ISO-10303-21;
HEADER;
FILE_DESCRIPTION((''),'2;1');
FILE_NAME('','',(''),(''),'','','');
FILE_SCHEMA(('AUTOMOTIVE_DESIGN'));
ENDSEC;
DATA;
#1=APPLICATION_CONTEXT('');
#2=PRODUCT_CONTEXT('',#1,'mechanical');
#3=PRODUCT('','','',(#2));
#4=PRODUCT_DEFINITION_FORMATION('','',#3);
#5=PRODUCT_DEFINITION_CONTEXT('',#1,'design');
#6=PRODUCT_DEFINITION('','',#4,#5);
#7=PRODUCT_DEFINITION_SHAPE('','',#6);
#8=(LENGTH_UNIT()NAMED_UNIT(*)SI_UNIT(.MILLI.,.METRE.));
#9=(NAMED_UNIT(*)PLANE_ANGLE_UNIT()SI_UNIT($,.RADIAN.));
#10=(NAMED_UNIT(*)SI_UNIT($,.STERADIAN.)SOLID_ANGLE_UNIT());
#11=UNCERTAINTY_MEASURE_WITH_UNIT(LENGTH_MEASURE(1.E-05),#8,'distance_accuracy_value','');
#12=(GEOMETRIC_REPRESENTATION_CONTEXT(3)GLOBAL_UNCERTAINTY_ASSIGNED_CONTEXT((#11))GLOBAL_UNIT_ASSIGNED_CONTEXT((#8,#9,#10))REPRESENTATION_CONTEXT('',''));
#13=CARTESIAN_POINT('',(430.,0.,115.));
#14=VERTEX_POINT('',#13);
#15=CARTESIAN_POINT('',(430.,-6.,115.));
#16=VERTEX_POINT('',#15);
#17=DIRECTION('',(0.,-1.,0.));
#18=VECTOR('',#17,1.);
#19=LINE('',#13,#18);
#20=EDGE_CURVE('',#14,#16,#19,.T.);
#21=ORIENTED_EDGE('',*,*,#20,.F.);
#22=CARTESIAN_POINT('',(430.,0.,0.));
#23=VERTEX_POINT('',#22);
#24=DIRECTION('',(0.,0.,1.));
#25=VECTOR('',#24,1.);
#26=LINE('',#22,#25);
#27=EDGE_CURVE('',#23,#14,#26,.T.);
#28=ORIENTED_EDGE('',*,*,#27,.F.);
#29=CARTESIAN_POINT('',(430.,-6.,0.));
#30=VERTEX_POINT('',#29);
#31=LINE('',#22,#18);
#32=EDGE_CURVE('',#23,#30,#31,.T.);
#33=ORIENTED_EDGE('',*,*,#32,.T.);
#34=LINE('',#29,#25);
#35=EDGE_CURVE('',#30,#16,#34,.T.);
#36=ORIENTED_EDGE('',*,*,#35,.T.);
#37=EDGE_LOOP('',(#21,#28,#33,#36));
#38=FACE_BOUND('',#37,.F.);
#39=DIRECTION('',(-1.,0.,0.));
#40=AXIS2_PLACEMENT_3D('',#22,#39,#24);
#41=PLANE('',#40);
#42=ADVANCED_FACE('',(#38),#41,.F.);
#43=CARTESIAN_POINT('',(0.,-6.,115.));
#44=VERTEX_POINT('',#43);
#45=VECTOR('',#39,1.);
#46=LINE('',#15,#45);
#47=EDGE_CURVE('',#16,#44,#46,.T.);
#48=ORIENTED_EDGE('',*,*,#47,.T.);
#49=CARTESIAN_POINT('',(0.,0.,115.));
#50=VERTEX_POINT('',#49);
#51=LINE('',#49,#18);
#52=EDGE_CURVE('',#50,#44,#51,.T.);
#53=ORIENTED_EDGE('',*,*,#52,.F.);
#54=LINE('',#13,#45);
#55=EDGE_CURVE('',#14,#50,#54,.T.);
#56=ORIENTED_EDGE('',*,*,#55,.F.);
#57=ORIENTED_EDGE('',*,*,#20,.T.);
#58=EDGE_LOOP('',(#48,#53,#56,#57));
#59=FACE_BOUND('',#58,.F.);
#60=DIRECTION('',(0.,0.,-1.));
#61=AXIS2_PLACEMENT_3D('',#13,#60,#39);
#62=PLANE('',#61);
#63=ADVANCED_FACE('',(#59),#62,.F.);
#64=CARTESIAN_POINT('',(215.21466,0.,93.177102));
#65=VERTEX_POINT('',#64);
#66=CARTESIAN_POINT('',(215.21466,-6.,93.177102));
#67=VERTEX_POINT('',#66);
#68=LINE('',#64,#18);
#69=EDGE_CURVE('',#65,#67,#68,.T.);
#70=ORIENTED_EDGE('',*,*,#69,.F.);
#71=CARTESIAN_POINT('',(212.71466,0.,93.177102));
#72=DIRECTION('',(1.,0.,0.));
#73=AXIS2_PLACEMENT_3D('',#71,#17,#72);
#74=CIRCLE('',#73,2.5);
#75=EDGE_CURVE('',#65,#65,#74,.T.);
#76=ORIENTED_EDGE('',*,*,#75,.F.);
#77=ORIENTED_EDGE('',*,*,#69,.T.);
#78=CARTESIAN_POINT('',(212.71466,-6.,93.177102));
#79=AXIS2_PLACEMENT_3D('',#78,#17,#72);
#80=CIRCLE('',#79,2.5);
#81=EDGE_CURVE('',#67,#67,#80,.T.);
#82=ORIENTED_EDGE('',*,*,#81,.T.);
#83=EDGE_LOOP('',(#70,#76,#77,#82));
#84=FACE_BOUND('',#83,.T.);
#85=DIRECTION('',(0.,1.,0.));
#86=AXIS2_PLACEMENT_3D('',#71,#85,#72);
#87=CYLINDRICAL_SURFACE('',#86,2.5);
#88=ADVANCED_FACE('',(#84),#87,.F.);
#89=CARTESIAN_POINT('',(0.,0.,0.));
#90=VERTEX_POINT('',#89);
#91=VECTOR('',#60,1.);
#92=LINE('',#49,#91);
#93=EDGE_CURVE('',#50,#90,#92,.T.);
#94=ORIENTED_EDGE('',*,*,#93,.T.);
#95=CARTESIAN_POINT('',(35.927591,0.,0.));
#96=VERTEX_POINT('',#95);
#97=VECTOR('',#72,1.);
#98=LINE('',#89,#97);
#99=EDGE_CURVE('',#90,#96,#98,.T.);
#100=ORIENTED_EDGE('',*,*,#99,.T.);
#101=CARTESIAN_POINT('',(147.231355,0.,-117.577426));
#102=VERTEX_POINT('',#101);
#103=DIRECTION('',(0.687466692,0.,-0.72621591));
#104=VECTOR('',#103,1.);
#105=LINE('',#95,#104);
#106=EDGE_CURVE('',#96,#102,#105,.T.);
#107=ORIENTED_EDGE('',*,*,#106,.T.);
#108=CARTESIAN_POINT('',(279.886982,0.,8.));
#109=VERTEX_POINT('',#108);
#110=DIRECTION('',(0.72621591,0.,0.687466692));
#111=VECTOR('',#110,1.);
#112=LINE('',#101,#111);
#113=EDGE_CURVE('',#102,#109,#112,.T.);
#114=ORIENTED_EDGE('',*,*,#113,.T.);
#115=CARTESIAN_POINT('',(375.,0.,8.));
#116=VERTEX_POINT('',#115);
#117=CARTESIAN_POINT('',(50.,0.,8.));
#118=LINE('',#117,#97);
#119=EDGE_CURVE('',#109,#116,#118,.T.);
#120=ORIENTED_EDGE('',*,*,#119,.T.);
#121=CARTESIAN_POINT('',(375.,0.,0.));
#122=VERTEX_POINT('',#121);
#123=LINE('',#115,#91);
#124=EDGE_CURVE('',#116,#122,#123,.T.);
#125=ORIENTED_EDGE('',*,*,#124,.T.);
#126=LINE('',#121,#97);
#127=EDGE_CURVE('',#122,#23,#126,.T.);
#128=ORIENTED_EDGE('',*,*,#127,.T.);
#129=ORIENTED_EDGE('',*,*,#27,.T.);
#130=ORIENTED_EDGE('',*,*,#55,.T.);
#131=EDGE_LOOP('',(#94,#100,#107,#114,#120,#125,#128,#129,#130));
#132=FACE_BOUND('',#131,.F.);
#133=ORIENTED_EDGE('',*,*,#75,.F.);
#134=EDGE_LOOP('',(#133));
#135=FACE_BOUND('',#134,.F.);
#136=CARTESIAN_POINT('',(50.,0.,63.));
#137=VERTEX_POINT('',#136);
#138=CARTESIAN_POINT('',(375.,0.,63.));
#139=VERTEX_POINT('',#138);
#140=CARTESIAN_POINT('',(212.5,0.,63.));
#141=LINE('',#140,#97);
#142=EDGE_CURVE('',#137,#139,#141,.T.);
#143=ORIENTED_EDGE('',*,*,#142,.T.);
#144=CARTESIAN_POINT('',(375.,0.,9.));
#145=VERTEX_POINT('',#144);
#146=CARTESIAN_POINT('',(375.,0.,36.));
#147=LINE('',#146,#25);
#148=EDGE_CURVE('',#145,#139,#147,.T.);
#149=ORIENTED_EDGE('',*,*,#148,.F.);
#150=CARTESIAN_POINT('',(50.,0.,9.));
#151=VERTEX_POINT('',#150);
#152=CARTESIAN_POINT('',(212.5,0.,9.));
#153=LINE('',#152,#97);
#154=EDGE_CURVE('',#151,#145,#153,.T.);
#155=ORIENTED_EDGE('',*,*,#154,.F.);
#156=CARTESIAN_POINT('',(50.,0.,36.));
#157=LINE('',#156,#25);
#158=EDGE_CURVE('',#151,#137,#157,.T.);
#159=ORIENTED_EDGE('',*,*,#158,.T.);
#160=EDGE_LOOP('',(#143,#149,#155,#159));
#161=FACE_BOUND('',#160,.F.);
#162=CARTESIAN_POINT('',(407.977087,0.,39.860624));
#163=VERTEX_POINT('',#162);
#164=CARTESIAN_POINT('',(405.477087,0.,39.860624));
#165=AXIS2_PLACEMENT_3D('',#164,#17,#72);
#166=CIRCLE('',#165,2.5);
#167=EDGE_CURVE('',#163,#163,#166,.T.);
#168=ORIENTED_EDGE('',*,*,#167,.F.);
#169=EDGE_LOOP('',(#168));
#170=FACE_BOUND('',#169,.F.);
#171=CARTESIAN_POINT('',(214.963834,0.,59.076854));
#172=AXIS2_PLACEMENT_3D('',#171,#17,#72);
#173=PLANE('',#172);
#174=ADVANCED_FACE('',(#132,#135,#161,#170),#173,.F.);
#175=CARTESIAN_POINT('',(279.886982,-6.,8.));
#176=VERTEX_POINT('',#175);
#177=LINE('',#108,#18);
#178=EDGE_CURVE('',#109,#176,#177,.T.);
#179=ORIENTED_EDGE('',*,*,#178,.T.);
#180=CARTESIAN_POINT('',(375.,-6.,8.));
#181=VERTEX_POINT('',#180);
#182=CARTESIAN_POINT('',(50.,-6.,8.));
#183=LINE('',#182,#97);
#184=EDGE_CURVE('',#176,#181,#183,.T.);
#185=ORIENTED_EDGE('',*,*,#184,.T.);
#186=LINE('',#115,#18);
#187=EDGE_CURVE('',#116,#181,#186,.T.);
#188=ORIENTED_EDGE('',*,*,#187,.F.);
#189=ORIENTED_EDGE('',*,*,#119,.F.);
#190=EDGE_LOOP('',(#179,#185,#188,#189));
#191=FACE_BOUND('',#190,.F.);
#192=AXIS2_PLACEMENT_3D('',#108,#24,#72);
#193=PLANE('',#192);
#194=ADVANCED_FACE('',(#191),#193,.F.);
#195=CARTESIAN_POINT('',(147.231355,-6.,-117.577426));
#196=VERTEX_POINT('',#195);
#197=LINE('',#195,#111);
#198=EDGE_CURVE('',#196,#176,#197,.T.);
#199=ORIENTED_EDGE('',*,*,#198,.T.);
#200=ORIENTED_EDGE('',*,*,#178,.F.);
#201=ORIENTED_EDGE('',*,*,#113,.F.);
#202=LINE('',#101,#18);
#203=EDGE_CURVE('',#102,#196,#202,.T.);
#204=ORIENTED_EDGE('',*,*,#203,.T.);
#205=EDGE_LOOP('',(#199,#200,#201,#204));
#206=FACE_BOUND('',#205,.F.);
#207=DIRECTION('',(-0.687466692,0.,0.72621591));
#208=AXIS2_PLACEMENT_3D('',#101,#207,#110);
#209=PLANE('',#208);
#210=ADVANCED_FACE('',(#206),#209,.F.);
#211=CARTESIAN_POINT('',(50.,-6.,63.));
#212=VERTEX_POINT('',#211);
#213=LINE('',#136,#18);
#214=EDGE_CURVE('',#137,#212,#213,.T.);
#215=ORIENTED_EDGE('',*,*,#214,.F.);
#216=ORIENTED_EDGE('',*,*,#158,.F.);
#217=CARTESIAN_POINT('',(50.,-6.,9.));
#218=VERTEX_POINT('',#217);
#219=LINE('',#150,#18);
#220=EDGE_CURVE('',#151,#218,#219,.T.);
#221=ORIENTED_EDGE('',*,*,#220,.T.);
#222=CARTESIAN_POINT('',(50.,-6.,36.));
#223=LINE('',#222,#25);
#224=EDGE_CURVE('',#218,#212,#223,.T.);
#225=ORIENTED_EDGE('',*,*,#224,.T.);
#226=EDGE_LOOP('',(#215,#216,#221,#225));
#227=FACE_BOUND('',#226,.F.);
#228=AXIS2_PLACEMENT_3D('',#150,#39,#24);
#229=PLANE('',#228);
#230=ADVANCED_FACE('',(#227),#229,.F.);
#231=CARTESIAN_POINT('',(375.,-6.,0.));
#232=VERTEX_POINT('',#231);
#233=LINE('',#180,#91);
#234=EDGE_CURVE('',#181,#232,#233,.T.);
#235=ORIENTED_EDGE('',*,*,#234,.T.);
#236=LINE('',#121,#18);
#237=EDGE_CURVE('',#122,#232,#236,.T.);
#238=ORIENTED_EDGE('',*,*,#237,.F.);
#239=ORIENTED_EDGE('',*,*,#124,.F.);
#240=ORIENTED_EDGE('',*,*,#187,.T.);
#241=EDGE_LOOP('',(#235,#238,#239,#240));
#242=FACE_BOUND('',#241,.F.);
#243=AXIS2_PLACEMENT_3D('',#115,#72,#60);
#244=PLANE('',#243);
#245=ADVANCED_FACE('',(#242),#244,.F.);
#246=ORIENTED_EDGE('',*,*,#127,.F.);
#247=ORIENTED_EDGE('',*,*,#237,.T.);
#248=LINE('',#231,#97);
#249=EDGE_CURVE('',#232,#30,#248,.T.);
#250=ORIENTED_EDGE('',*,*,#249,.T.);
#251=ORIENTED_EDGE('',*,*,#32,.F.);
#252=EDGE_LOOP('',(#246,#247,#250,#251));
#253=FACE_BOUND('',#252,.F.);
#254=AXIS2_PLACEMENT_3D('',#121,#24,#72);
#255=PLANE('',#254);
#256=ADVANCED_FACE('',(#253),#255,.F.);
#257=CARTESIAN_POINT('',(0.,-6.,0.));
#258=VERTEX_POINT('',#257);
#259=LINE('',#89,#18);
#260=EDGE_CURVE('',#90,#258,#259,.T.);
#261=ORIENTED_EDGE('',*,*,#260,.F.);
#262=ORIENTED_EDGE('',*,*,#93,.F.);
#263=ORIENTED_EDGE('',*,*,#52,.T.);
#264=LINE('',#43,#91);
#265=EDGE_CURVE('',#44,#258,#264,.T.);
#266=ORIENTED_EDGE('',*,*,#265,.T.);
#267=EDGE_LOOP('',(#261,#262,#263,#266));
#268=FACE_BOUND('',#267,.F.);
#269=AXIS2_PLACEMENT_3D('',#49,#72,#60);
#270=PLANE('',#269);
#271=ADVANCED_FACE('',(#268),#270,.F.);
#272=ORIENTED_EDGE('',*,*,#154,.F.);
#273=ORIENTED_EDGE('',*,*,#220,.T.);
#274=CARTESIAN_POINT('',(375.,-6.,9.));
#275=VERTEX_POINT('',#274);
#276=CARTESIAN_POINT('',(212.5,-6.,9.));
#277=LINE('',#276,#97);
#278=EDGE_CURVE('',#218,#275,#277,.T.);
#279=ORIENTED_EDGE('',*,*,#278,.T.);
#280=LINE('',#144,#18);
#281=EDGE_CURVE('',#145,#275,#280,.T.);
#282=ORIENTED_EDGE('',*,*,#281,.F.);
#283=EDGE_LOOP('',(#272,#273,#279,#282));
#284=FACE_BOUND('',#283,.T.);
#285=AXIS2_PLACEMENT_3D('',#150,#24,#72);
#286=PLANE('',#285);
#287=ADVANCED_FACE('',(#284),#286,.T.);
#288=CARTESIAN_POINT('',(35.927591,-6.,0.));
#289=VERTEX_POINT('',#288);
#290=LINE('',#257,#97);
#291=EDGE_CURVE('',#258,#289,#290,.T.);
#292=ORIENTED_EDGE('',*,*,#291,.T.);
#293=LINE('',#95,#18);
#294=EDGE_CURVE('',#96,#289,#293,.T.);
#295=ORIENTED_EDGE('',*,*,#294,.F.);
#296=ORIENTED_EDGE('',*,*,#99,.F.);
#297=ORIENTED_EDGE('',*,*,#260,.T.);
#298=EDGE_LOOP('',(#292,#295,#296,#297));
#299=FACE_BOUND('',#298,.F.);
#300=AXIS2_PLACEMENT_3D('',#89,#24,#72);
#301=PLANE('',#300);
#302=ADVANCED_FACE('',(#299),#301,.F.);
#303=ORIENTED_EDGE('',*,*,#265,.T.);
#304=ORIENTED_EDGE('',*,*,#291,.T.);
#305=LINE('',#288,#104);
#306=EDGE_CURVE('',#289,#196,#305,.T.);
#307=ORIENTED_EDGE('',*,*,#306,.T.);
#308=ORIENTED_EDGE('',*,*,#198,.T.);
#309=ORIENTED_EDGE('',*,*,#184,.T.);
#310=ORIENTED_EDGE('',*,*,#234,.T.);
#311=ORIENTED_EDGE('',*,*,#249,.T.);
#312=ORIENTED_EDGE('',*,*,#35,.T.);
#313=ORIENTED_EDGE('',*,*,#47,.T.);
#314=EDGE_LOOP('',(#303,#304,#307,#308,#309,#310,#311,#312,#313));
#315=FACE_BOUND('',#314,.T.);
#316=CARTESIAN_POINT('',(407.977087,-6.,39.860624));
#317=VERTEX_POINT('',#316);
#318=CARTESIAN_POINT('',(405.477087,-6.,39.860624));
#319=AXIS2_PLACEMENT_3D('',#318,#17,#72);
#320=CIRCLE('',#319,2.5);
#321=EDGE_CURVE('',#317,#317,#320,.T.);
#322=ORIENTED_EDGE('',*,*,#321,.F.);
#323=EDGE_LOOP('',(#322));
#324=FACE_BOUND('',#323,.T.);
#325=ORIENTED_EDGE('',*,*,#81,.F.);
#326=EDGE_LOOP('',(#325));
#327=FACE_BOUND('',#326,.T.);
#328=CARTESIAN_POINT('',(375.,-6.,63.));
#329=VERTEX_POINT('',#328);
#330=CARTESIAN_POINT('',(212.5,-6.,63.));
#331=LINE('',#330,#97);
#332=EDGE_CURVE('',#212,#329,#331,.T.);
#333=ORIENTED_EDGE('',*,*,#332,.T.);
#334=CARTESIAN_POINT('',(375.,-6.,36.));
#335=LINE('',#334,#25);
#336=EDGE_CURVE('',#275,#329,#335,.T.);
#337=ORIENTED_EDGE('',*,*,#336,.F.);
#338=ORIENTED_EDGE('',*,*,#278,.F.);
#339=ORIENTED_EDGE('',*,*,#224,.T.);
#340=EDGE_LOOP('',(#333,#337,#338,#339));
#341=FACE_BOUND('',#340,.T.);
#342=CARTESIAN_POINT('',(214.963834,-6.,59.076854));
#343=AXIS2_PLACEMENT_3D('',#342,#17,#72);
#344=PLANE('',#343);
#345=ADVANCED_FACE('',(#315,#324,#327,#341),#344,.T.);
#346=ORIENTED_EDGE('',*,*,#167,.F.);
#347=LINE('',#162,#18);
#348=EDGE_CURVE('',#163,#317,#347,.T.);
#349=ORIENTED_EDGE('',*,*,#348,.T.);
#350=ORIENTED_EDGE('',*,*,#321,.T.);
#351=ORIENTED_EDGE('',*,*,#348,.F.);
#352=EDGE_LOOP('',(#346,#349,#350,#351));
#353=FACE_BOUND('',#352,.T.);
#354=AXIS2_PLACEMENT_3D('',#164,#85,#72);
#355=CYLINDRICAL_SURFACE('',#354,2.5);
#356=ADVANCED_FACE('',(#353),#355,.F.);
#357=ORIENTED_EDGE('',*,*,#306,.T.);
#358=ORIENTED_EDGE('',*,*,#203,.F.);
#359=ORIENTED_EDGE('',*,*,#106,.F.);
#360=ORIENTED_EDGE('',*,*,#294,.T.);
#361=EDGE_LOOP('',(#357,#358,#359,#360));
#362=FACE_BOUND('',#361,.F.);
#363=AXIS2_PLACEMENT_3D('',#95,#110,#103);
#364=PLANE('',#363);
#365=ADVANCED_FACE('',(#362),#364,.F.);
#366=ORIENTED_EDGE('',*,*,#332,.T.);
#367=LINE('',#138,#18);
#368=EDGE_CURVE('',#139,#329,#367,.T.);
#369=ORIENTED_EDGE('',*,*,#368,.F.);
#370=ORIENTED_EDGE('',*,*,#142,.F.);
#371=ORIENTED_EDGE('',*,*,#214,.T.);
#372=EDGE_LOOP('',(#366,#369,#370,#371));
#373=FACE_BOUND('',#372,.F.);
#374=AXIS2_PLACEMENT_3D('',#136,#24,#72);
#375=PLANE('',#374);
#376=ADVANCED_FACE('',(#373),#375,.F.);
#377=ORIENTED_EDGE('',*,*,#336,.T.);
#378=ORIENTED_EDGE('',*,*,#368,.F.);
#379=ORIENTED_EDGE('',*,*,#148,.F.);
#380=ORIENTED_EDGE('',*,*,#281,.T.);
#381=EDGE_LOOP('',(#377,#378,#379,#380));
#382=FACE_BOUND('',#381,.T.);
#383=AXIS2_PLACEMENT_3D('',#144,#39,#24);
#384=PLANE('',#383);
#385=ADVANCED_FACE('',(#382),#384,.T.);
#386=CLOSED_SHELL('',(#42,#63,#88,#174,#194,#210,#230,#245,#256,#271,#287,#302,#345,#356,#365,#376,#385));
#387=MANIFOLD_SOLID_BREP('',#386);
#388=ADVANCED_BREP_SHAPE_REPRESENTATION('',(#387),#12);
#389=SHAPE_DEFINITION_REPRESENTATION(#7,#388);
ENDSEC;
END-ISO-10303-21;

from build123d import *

# Parameters (mm, degrees)
F0_W     = 325
F0_H     = 54
F0_R     = 2.5
F1_DEPTH = 6


# Not quite as in the source:
# - a feature names something its author has since deleted; it is built from what else it names


with BuildPart() as f1:
    # F0 (on Front) → F1 (new body)
    with BuildSketch(Plane.XZ):
        Polygon((0, 115), (0, 0), (35.9275913919, 0), (50, 0), (50, 8), (279.8869819123, 8), (375, 8), (375, 0), (430, 0), (430, 115), align=None)
        with Locations((212.5, 36)):
            Rectangle(F0_W, F0_H, mode=Mode.SUBTRACT)
        with Locations((212.7146603412, 93.1771022268)):
            Circle(F0_R, mode=Mode.SUBTRACT)
        with Locations((405.4770870114, 39.8606238714)):
            Circle(F0_R, mode=Mode.SUBTRACT)
        Polygon((50, 0), (35.9275913919, 0), (147.2313553095, -117.5774261355), (279.8869819123, 8), (50, 8), align=None)
    extrude(amount=F1_DEPTH)


solid = f1.part
